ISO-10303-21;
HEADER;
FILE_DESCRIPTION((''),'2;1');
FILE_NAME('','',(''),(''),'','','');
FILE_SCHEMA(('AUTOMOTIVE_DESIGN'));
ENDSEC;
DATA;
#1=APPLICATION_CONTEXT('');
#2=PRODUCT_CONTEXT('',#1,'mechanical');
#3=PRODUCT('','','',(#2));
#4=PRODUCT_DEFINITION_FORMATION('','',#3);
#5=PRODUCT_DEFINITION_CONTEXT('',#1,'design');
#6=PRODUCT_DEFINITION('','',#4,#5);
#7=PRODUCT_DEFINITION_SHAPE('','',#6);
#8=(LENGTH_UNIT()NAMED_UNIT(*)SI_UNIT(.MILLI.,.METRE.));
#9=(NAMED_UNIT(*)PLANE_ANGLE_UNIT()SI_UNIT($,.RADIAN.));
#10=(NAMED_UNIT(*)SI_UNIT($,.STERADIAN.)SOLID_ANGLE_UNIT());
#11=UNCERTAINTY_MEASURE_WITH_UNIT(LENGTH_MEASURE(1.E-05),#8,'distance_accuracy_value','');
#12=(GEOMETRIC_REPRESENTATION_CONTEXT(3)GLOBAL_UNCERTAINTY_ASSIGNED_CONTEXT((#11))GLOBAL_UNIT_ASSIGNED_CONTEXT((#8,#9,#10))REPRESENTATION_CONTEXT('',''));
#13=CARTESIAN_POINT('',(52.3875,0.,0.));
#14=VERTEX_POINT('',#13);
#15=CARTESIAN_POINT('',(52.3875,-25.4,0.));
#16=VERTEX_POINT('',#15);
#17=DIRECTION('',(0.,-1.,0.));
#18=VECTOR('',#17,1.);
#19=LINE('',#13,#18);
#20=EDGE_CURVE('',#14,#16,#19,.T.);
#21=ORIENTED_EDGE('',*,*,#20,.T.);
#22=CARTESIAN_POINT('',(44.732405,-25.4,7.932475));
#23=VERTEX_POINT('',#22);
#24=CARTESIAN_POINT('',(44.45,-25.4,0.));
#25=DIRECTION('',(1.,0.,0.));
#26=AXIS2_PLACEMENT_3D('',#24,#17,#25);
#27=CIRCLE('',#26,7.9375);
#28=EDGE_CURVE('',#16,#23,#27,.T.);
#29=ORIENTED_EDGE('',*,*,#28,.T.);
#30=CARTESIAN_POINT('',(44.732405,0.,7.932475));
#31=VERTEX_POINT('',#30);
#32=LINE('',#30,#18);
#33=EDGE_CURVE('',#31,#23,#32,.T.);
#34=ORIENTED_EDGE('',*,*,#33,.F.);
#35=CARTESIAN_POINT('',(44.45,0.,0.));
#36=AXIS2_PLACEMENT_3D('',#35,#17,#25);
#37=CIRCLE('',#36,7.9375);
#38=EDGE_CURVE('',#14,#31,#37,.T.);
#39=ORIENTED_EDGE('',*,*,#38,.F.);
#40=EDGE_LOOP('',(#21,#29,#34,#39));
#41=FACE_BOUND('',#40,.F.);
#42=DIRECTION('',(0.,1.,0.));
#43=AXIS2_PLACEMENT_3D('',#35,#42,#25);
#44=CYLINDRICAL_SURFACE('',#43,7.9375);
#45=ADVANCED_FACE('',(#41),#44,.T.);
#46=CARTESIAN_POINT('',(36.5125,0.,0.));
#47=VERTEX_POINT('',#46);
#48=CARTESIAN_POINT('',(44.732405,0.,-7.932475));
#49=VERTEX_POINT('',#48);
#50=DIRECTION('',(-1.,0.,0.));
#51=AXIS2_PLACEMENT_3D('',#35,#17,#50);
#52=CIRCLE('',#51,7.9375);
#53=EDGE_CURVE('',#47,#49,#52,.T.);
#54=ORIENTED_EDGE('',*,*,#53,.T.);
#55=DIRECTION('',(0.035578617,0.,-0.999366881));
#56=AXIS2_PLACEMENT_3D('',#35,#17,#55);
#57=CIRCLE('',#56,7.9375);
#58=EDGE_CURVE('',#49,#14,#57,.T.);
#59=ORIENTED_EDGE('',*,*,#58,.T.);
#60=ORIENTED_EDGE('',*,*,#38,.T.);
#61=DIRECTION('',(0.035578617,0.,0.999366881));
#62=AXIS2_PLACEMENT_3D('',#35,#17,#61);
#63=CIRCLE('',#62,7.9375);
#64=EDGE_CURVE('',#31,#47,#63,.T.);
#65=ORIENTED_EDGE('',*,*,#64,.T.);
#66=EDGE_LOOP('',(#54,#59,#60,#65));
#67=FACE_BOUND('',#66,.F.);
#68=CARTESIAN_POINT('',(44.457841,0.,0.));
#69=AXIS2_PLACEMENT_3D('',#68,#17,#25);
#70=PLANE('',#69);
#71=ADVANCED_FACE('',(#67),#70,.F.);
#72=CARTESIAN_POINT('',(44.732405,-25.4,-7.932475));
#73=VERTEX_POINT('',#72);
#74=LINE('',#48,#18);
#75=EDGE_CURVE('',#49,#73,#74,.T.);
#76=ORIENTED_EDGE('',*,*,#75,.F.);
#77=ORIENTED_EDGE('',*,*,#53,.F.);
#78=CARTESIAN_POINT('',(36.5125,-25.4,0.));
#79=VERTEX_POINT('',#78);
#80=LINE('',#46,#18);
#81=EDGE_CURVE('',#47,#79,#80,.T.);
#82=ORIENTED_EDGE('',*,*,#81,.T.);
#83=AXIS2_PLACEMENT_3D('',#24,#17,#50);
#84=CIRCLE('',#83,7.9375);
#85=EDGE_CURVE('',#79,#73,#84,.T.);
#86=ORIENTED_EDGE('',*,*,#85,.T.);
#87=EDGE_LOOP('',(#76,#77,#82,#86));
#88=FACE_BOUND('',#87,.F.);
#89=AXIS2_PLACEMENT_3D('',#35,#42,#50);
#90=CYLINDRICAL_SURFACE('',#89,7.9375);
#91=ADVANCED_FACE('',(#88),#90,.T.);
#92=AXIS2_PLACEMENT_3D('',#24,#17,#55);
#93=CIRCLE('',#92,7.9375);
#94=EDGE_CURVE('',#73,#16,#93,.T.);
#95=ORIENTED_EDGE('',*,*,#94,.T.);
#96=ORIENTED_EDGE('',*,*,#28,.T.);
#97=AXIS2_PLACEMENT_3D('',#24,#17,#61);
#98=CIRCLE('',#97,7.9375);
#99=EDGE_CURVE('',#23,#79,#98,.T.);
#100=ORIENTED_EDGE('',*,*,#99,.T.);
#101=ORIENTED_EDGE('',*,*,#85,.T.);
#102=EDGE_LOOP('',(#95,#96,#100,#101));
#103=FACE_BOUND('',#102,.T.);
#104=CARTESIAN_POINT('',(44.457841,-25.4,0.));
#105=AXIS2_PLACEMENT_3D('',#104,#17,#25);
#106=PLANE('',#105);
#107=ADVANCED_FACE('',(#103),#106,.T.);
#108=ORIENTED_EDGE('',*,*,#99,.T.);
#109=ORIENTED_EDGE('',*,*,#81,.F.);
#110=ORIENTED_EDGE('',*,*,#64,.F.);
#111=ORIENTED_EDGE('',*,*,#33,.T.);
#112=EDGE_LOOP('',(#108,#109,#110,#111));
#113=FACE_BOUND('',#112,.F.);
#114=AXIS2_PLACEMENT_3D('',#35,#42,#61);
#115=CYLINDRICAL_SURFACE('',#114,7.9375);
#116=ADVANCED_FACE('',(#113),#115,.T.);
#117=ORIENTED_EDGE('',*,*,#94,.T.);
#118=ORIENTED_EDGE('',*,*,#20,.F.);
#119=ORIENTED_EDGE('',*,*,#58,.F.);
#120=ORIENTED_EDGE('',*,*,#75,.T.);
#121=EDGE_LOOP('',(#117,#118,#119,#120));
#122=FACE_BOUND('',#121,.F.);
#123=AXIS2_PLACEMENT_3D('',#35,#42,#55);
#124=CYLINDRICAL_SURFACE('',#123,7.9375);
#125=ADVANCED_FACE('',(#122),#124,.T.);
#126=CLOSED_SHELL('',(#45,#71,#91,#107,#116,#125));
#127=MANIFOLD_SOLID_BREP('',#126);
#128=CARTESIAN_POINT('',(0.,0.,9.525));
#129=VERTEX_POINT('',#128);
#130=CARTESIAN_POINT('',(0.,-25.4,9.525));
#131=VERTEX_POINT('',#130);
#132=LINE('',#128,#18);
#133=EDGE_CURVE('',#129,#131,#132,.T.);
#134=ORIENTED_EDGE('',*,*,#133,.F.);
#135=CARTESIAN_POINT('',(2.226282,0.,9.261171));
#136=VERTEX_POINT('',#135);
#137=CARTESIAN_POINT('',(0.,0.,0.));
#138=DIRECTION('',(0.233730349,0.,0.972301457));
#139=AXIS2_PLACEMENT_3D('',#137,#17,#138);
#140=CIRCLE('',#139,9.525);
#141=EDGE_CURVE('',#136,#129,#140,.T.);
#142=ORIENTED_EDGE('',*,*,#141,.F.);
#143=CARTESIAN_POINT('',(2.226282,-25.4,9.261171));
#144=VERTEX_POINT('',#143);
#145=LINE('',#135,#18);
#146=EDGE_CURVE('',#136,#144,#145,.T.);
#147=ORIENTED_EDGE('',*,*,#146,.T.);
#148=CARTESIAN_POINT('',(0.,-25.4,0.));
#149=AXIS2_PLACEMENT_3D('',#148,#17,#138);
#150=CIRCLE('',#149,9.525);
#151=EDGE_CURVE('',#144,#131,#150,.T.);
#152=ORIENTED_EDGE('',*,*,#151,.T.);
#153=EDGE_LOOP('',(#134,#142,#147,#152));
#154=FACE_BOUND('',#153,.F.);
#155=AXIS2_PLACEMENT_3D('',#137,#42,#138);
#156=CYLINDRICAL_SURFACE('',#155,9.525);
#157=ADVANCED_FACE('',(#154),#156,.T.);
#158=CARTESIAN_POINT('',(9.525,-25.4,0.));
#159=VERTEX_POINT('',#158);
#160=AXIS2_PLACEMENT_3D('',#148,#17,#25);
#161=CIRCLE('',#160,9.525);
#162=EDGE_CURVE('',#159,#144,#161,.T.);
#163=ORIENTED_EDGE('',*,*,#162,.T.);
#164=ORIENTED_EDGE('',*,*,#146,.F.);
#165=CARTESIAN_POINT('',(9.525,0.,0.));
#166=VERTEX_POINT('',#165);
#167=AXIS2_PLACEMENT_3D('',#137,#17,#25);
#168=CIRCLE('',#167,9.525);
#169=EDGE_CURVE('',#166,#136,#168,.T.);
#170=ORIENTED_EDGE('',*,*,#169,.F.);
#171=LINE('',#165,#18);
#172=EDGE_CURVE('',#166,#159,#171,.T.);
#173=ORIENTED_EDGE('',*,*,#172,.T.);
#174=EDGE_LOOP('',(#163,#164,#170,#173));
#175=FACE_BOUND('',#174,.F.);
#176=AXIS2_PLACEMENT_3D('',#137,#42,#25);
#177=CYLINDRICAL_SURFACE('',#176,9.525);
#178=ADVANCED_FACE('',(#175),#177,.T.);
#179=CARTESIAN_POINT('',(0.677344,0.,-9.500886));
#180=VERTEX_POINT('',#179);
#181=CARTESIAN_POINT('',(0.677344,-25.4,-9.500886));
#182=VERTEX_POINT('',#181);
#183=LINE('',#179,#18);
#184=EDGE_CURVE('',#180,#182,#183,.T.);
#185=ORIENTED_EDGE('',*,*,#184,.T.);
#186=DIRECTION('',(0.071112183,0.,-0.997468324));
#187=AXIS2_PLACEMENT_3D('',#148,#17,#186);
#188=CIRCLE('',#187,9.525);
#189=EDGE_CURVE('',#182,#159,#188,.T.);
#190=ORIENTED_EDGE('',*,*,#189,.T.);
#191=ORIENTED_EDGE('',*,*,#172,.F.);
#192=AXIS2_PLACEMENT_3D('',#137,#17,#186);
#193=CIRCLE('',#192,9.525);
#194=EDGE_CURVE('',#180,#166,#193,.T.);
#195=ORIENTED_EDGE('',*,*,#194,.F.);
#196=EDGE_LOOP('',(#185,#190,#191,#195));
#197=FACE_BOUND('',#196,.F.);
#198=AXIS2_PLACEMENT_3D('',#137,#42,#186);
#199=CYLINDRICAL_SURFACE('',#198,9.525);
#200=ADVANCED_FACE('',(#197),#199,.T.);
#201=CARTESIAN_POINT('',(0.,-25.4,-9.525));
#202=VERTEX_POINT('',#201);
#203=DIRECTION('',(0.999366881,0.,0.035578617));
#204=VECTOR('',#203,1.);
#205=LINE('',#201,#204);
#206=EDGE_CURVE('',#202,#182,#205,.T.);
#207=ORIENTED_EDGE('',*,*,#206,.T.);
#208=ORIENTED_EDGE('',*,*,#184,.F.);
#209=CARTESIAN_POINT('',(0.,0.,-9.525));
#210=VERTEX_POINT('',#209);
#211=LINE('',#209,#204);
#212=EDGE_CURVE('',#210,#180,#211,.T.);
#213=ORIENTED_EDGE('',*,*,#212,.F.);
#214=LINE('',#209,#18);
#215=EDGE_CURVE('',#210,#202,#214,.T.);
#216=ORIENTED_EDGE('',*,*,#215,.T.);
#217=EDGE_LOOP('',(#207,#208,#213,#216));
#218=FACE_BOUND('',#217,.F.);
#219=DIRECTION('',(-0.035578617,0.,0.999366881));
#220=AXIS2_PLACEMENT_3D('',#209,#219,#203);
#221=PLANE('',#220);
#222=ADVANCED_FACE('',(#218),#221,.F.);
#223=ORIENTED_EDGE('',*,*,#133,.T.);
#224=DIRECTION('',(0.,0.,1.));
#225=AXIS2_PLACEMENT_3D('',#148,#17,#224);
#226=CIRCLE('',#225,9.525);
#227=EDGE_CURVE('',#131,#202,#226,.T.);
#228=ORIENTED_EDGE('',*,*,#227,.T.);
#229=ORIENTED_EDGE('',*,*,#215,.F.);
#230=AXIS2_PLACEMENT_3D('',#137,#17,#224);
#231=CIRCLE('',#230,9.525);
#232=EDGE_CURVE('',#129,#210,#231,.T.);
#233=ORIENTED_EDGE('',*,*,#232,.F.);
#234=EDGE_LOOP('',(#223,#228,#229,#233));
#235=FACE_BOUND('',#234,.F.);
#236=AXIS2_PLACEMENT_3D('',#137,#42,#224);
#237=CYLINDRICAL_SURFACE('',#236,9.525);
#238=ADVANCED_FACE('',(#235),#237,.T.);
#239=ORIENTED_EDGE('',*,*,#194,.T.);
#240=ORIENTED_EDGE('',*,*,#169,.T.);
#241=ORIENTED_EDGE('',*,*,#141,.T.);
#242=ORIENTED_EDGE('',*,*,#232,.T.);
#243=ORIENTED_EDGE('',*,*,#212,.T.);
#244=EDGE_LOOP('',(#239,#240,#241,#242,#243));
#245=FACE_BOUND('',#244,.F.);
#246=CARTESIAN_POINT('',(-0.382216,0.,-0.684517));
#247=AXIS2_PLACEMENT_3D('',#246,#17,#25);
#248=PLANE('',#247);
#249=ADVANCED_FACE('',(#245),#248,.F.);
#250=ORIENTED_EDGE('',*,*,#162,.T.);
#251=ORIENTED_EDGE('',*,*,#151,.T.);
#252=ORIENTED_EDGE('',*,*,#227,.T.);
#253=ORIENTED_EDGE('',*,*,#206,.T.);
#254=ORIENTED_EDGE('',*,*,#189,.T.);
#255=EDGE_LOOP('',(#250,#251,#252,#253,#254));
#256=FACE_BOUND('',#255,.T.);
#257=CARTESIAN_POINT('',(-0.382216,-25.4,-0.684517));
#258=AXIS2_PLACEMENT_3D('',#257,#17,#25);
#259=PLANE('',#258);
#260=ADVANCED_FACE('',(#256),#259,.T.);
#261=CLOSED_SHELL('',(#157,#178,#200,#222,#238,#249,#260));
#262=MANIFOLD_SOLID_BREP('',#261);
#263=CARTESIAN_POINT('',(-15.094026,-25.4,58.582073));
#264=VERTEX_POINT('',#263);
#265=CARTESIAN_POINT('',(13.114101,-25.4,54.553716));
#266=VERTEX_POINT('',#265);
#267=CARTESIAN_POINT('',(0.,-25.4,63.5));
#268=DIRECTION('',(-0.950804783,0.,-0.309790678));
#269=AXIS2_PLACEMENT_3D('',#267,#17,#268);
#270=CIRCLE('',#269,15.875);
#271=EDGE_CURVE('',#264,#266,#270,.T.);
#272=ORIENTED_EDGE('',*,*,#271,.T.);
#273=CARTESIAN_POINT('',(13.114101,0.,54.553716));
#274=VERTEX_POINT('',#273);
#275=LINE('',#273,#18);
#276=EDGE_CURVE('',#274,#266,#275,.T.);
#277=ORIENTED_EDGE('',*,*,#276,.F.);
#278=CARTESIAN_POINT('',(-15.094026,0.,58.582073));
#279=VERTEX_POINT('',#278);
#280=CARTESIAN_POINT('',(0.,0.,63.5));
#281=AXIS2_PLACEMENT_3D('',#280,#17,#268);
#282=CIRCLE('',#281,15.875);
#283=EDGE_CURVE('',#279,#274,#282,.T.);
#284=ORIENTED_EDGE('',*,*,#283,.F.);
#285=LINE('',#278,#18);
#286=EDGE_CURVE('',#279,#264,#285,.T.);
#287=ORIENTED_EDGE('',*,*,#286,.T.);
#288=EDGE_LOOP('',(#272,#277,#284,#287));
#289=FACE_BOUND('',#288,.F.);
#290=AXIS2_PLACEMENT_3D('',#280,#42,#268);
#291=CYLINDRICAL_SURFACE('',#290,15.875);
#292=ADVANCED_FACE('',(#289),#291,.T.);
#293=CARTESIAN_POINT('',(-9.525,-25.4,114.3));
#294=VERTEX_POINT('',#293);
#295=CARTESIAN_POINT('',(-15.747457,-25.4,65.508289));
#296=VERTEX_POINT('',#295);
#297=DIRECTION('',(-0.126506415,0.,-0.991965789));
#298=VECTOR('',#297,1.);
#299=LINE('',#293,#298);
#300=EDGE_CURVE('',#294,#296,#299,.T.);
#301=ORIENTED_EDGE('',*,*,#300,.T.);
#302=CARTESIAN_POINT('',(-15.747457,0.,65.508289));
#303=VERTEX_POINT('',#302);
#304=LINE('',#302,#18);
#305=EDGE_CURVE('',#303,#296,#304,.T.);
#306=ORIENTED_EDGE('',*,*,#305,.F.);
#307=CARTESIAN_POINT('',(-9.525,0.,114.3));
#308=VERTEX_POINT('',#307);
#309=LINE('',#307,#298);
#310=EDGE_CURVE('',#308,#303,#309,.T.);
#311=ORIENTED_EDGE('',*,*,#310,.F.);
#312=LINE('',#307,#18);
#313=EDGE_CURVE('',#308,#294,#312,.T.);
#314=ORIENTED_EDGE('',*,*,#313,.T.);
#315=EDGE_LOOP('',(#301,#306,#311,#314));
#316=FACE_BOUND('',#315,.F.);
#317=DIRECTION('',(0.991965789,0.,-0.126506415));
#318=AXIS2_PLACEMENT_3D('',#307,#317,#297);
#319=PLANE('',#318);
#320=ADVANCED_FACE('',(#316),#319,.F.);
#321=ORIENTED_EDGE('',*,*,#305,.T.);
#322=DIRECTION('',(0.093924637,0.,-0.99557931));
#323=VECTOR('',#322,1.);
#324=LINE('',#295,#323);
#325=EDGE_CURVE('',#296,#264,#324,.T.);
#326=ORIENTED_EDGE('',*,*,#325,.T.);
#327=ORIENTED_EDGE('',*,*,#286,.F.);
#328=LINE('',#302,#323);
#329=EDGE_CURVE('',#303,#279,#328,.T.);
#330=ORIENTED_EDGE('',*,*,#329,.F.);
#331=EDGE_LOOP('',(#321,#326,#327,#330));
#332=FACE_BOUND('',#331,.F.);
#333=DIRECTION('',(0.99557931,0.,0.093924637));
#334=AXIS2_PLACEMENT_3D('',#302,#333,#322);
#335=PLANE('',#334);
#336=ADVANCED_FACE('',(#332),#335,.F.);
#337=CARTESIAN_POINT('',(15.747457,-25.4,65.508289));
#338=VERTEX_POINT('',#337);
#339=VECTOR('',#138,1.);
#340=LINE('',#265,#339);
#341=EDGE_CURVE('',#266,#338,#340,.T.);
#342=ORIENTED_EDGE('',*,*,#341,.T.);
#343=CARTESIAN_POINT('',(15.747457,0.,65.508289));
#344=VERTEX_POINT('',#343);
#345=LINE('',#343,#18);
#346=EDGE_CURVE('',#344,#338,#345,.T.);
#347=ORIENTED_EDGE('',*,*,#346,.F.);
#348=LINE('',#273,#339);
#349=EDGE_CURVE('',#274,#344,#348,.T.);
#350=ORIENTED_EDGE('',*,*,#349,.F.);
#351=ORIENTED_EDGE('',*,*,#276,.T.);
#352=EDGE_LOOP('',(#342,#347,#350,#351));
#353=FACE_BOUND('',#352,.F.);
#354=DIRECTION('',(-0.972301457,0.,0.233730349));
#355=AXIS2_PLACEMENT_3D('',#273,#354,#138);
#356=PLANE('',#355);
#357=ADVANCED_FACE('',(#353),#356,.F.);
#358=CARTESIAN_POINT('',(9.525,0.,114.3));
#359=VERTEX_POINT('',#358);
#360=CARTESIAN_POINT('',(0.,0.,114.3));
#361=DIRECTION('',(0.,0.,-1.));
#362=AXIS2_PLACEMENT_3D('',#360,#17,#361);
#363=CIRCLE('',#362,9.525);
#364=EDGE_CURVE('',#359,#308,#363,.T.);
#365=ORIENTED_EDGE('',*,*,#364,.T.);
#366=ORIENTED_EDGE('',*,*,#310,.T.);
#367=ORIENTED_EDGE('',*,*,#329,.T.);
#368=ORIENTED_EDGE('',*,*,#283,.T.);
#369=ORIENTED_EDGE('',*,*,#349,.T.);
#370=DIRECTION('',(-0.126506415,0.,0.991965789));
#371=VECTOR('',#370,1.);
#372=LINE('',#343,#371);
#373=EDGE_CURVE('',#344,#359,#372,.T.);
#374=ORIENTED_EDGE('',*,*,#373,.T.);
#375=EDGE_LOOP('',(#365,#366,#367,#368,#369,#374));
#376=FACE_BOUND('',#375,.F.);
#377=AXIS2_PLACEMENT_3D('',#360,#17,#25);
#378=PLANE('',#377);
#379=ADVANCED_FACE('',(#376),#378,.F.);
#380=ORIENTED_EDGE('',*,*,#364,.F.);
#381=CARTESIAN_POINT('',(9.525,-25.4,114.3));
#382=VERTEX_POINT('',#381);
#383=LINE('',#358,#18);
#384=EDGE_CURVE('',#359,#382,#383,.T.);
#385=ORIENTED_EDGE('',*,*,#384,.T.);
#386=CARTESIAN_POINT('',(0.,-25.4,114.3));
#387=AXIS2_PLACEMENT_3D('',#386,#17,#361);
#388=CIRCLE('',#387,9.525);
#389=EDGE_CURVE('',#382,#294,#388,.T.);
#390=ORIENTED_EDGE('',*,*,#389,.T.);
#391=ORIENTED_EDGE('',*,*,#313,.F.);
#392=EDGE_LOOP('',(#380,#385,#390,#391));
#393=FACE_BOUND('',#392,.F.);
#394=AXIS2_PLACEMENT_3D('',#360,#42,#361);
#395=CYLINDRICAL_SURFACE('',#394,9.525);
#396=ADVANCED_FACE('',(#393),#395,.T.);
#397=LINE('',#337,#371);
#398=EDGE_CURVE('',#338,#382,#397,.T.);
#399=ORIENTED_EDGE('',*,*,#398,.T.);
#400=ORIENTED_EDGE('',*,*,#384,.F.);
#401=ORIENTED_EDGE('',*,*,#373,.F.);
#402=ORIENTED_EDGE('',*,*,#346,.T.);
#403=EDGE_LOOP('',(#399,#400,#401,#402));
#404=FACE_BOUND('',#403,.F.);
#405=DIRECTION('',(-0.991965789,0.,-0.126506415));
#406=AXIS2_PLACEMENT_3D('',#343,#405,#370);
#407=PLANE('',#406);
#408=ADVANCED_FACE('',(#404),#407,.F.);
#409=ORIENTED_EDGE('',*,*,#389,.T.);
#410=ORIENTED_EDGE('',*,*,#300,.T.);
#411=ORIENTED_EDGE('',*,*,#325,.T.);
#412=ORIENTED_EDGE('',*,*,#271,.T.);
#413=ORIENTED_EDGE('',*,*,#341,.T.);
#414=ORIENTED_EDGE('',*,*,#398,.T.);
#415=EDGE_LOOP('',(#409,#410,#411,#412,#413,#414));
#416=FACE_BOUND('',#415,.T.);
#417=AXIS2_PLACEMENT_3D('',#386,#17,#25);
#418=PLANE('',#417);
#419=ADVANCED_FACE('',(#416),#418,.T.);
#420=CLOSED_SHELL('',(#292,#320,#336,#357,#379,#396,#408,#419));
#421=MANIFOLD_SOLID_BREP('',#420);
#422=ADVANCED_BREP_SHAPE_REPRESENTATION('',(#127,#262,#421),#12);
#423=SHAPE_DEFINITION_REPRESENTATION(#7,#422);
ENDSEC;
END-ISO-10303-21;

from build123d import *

# Parameters (mm, degrees)
F1_DEPTH = 25.4


# Not quite as in the source:
# - a feature names something its author has since deleted; it is built from what else it names


with BuildPart() as f1:
    # F0 (on Front) → F1 (new body)
    with BuildSketch(Plane.XZ):
        with BuildLine():
            ThreePointArc((0, 104.775), (6.7351920908, 107.5648079092), (9.525, 114.3))
            ThreePointArc((9.525, 114.3), (0, 123.825), (-9.525, 114.3))
            ThreePointArc((-9.525, 114.3), (-6.7351920908, 107.5648079092), (0, 104.775))
        make_face()
        with BuildLine():
            Line((15.7474569047, 65.5082893304), (9.525, 114.3))
            ThreePointArc((9.525, 114.3), (6.7351920908, 107.5648079092), (0, 104.775))
            Line((0, 104.775), (0, 79.375))
            ThreePointArc((0, 79.375), (10.4912828548, 75.4142187767), (15.7474569047, 65.5082893304))
        make_face()
        with BuildLine():
            ThreePointArc((0, 104.775), (-6.7351920908, 107.5648079092), (-9.525, 114.3))
            Line((-9.525, 114.3), (-15.7474569047, 65.5082893304))
            ThreePointArc((-15.7474569047, 65.5082893304), (-10.4912828548, 75.4142187767), (0, 79.375))
            Line((0, 79.375), (0, 104.775))
        make_face()
        with BuildLine():
            Line((13.1141006333, 54.5537164375), (15.7474569047, 65.5082893304))
            ThreePointArc((15.7474569047, 65.5082893304), (10.4912828548, 75.4142187767), (0, 79.375))
            ThreePointArc((0, 79.375), (-10.4912828548, 75.4142187767), (-15.7474569047, 65.5082893304))
            Line((-15.7474569047, 65.5082893304), (-15.0940259351, 58.5820729906))
            ThreePointArc((-15.0940259351, 58.5820729906), (-2.2443128525, 47.7844444953), (13.1141006333, 54.5537164375))
        make_face()
    extrude(amount=F1_DEPTH)


with BuildPart() as f1b:
    # F0 (on Front) → F1, piece 2 (new body)
    with BuildSketch(Plane.XZ):
        with BuildLine():
            Line((0, -9.525), (0.6773435479, -9.500885786))
            ThreePointArc((0.6773435479, -9.500885786), (6.9705567315, -6.4912990883), (9.525, 0))
            Line((9.525, 0), (0, 0))
            Line((0, 0), (0, 9.525))
            ThreePointArc((0, 9.525), (-9.525, 0), (0, -9.525))
        make_face()
        with BuildLine():
            Line((0, 0), (9.525, 0))
            ThreePointArc((9.525, 0), (7.4810078517, 5.8957736152), (2.2262815701, 9.2611713822))
            Line((2.2262815701, 9.2611713822), (0, 0))
        make_face()
        with BuildLine():
            ThreePointArc((2.2262815701, 9.2611713822), (1.1209298784, 9.4588128858), (0, 9.525))
            Line((0, 9.525), (0, 0))
            Line((0, 0), (2.2262815701, 9.2611713822))
        make_face()
    extrude(amount=F1_DEPTH)


with BuildPart() as f1c:
    # F0 (on Front) → F1, piece 3 (new body)
    with BuildSketch(Plane.XZ):
        with BuildLine():
            ThreePointArc((52.3875, 0), (50.1616327839, 5.5119104847), (44.7324052746, 7.9324746146))
            ThreePointArc((44.7324052746, 7.9324746146), (38.9380895153, 5.7116327839), (36.5125, 0))
            ThreePointArc((36.5125, 0), (38.9380895153, -5.7116327839), (44.7324052746, -7.9324746146))
            ThreePointArc((44.7324052746, -7.9324746146), (50.1616327839, -5.5119104847), (52.3875, 0))
        make_face()
    extrude(amount=F1_DEPTH)


solid = Compound([f1.part, f1b.part, f1c.part])
